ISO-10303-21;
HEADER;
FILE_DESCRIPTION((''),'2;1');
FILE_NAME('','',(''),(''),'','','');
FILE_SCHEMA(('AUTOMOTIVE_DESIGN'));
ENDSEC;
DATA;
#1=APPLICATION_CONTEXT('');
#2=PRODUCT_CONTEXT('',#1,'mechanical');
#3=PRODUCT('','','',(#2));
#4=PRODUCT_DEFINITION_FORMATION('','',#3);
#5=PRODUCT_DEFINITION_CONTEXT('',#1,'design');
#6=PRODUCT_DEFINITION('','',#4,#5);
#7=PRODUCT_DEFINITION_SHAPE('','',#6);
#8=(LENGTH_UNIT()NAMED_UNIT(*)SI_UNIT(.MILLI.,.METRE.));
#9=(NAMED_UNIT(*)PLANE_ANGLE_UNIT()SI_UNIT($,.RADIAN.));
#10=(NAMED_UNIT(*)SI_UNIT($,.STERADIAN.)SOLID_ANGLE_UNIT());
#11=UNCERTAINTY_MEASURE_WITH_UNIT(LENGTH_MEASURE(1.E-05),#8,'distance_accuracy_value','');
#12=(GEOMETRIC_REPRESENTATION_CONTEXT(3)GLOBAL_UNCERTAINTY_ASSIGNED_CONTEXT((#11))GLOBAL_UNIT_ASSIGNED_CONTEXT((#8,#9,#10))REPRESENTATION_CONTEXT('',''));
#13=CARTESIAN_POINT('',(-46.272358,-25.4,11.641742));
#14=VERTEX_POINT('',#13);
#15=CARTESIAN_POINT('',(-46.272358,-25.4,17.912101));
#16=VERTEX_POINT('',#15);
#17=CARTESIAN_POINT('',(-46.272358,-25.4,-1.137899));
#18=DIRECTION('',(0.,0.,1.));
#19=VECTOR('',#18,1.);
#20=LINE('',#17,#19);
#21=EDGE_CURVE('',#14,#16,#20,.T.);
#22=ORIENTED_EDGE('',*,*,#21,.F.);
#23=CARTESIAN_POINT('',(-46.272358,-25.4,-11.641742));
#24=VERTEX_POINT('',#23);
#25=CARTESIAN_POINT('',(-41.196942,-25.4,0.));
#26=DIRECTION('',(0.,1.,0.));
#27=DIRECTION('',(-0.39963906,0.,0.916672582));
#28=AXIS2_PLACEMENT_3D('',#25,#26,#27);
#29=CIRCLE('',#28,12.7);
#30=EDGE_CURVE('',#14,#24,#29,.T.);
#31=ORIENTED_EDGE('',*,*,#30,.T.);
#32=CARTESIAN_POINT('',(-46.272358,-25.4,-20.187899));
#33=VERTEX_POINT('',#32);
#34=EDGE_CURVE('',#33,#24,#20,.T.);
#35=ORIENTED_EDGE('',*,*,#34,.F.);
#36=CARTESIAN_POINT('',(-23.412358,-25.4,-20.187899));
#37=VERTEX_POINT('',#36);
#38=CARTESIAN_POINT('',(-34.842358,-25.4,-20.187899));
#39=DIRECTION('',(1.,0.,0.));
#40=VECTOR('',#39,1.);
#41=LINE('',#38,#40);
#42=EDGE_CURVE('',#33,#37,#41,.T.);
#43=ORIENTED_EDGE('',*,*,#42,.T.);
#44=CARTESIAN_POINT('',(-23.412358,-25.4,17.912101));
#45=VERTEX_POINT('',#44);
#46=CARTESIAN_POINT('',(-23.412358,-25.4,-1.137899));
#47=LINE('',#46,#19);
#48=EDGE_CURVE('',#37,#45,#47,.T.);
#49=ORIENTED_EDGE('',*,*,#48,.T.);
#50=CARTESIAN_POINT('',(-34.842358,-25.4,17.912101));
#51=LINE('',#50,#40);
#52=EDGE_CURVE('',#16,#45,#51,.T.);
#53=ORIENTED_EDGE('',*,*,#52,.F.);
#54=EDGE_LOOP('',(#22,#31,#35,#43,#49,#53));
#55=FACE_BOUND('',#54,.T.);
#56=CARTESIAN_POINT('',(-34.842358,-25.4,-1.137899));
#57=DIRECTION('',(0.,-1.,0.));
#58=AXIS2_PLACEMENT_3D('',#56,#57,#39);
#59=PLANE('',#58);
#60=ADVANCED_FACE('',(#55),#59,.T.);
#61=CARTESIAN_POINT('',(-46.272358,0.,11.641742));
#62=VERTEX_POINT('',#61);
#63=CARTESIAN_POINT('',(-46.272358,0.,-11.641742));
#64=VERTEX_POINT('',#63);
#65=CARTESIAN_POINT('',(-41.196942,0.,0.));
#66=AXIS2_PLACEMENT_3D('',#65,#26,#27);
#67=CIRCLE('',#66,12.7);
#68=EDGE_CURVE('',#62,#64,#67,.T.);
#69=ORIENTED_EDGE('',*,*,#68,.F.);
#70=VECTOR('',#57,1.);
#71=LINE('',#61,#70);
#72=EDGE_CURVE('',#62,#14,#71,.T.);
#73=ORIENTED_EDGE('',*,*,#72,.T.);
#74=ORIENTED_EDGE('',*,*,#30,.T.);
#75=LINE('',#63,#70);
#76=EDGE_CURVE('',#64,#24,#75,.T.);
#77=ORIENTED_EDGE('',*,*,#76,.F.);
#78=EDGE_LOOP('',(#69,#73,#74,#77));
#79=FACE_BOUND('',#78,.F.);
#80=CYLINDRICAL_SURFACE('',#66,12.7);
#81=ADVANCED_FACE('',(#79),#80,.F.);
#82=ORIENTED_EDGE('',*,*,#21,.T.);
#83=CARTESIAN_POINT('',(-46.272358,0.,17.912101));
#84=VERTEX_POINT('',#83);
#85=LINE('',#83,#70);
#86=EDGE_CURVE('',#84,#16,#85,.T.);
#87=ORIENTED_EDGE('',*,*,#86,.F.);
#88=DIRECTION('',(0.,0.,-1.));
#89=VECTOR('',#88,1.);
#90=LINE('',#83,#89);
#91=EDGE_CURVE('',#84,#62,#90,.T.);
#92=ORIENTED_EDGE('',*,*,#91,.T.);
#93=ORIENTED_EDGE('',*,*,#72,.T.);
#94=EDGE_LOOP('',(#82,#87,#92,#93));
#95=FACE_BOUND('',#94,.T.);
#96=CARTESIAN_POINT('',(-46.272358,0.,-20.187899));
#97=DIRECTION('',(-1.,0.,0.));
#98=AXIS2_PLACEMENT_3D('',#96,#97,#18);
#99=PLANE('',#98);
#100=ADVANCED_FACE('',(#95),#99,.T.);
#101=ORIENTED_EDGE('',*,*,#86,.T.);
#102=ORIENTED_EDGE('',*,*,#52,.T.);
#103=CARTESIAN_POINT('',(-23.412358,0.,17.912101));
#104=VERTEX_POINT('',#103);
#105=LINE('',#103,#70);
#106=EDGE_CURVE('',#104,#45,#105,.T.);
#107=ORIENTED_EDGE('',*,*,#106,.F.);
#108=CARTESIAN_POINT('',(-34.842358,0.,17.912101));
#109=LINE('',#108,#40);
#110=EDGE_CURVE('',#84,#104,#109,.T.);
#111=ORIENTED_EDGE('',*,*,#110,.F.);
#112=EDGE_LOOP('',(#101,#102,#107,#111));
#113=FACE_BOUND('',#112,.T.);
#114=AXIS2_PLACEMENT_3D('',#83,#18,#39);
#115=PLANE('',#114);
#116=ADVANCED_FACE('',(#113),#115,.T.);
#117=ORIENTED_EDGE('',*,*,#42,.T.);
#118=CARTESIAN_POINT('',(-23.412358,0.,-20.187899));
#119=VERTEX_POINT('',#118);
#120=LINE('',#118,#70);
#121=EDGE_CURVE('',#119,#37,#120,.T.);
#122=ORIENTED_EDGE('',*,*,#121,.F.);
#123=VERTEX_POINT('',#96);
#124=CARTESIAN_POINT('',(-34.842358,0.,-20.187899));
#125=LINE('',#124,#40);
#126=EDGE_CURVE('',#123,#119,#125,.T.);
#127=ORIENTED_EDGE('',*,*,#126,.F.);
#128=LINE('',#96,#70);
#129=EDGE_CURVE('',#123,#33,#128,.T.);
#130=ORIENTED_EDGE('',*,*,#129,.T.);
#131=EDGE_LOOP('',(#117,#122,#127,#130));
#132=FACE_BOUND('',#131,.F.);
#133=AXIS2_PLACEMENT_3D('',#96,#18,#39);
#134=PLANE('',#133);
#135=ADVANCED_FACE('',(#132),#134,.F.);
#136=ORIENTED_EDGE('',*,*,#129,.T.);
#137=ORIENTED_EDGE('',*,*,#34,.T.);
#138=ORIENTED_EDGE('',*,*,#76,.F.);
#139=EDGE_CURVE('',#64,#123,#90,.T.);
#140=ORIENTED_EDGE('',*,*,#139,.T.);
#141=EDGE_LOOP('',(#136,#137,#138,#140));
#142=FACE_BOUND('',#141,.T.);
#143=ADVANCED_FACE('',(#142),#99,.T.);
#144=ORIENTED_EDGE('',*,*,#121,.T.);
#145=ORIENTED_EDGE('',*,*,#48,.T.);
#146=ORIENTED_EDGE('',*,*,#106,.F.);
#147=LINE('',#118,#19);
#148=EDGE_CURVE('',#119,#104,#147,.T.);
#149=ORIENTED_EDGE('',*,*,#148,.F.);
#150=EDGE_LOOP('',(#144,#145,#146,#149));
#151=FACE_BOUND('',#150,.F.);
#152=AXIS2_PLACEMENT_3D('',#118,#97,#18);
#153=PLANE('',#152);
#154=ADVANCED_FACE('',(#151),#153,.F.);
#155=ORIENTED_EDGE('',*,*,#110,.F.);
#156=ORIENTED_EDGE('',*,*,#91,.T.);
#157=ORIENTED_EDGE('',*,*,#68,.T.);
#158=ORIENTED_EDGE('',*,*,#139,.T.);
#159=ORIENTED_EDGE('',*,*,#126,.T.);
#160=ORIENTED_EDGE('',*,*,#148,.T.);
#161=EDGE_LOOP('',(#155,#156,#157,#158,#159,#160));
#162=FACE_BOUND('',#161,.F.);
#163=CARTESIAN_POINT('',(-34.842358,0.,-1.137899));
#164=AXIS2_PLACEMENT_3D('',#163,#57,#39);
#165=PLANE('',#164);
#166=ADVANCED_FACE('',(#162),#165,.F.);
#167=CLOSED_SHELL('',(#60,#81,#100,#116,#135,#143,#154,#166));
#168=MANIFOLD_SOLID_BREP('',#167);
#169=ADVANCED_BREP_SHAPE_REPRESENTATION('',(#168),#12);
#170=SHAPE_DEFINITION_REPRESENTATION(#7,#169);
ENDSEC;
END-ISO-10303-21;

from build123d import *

# Parameters (mm, degrees)
F0_W     = 22.86
F0_H     = 38.1
F1_DEPTH = 25.4
F2_R     = 12.7
F3_DEPTH = 89
F5_DEPTH = 25.401


# Not quite as in the source:
# - an extrude ends at something that could not be found from the text; its depth is read off the source's solid


with BuildPart() as f1:
    # F0 (on Front) → F1 (new body)
    with BuildSketch(Plane.XZ):
        with Locations((-34.8423583888, -1.1378988595)):
            Rectangle(F0_W, F0_H)
    extrude(amount=F1_DEPTH)

    # F2 (on Front) → F3 (cut, through all)
    with BuildSketch(Plane.XZ):
        with Locations((-35.3627614677, 3.7935657892)):
            Circle(F2_R)
    extrude(amount=-F3_DEPTH, mode=Mode.SUBTRACT)

    # F4 (on face) → F5 (cut, through all)
    with BuildSketch(Plane(origin=(0, 0, 0), x_dir=(-1, 0, 0), z_dir=(0, 1, 0))):
        with BuildLine():
            ThreePointArc((46.2723583888, -11.6417417865), (51.8211548639, -6.9581684388), (53.8969423294, 0))
            ThreePointArc((53.8969423294, 0), (51.8211548639, 6.9581684388), (46.2723583888, 11.6417417865))
            Line((46.2723583888, 11.6417417865), (46.2723583888, -11.6417417865))
        make_face()
        with BuildLine():
            Line((46.2723583888, -11.6417417865), (46.2723583888, 11.6417417865))
            ThreePointArc((46.2723583888, 11.6417417865), (28.4969423294, 0), (46.2723583888, -11.6417417865))
        make_face()
    extrude(amount=-F5_DEPTH, mode=Mode.SUBTRACT)


solid = f1.part
